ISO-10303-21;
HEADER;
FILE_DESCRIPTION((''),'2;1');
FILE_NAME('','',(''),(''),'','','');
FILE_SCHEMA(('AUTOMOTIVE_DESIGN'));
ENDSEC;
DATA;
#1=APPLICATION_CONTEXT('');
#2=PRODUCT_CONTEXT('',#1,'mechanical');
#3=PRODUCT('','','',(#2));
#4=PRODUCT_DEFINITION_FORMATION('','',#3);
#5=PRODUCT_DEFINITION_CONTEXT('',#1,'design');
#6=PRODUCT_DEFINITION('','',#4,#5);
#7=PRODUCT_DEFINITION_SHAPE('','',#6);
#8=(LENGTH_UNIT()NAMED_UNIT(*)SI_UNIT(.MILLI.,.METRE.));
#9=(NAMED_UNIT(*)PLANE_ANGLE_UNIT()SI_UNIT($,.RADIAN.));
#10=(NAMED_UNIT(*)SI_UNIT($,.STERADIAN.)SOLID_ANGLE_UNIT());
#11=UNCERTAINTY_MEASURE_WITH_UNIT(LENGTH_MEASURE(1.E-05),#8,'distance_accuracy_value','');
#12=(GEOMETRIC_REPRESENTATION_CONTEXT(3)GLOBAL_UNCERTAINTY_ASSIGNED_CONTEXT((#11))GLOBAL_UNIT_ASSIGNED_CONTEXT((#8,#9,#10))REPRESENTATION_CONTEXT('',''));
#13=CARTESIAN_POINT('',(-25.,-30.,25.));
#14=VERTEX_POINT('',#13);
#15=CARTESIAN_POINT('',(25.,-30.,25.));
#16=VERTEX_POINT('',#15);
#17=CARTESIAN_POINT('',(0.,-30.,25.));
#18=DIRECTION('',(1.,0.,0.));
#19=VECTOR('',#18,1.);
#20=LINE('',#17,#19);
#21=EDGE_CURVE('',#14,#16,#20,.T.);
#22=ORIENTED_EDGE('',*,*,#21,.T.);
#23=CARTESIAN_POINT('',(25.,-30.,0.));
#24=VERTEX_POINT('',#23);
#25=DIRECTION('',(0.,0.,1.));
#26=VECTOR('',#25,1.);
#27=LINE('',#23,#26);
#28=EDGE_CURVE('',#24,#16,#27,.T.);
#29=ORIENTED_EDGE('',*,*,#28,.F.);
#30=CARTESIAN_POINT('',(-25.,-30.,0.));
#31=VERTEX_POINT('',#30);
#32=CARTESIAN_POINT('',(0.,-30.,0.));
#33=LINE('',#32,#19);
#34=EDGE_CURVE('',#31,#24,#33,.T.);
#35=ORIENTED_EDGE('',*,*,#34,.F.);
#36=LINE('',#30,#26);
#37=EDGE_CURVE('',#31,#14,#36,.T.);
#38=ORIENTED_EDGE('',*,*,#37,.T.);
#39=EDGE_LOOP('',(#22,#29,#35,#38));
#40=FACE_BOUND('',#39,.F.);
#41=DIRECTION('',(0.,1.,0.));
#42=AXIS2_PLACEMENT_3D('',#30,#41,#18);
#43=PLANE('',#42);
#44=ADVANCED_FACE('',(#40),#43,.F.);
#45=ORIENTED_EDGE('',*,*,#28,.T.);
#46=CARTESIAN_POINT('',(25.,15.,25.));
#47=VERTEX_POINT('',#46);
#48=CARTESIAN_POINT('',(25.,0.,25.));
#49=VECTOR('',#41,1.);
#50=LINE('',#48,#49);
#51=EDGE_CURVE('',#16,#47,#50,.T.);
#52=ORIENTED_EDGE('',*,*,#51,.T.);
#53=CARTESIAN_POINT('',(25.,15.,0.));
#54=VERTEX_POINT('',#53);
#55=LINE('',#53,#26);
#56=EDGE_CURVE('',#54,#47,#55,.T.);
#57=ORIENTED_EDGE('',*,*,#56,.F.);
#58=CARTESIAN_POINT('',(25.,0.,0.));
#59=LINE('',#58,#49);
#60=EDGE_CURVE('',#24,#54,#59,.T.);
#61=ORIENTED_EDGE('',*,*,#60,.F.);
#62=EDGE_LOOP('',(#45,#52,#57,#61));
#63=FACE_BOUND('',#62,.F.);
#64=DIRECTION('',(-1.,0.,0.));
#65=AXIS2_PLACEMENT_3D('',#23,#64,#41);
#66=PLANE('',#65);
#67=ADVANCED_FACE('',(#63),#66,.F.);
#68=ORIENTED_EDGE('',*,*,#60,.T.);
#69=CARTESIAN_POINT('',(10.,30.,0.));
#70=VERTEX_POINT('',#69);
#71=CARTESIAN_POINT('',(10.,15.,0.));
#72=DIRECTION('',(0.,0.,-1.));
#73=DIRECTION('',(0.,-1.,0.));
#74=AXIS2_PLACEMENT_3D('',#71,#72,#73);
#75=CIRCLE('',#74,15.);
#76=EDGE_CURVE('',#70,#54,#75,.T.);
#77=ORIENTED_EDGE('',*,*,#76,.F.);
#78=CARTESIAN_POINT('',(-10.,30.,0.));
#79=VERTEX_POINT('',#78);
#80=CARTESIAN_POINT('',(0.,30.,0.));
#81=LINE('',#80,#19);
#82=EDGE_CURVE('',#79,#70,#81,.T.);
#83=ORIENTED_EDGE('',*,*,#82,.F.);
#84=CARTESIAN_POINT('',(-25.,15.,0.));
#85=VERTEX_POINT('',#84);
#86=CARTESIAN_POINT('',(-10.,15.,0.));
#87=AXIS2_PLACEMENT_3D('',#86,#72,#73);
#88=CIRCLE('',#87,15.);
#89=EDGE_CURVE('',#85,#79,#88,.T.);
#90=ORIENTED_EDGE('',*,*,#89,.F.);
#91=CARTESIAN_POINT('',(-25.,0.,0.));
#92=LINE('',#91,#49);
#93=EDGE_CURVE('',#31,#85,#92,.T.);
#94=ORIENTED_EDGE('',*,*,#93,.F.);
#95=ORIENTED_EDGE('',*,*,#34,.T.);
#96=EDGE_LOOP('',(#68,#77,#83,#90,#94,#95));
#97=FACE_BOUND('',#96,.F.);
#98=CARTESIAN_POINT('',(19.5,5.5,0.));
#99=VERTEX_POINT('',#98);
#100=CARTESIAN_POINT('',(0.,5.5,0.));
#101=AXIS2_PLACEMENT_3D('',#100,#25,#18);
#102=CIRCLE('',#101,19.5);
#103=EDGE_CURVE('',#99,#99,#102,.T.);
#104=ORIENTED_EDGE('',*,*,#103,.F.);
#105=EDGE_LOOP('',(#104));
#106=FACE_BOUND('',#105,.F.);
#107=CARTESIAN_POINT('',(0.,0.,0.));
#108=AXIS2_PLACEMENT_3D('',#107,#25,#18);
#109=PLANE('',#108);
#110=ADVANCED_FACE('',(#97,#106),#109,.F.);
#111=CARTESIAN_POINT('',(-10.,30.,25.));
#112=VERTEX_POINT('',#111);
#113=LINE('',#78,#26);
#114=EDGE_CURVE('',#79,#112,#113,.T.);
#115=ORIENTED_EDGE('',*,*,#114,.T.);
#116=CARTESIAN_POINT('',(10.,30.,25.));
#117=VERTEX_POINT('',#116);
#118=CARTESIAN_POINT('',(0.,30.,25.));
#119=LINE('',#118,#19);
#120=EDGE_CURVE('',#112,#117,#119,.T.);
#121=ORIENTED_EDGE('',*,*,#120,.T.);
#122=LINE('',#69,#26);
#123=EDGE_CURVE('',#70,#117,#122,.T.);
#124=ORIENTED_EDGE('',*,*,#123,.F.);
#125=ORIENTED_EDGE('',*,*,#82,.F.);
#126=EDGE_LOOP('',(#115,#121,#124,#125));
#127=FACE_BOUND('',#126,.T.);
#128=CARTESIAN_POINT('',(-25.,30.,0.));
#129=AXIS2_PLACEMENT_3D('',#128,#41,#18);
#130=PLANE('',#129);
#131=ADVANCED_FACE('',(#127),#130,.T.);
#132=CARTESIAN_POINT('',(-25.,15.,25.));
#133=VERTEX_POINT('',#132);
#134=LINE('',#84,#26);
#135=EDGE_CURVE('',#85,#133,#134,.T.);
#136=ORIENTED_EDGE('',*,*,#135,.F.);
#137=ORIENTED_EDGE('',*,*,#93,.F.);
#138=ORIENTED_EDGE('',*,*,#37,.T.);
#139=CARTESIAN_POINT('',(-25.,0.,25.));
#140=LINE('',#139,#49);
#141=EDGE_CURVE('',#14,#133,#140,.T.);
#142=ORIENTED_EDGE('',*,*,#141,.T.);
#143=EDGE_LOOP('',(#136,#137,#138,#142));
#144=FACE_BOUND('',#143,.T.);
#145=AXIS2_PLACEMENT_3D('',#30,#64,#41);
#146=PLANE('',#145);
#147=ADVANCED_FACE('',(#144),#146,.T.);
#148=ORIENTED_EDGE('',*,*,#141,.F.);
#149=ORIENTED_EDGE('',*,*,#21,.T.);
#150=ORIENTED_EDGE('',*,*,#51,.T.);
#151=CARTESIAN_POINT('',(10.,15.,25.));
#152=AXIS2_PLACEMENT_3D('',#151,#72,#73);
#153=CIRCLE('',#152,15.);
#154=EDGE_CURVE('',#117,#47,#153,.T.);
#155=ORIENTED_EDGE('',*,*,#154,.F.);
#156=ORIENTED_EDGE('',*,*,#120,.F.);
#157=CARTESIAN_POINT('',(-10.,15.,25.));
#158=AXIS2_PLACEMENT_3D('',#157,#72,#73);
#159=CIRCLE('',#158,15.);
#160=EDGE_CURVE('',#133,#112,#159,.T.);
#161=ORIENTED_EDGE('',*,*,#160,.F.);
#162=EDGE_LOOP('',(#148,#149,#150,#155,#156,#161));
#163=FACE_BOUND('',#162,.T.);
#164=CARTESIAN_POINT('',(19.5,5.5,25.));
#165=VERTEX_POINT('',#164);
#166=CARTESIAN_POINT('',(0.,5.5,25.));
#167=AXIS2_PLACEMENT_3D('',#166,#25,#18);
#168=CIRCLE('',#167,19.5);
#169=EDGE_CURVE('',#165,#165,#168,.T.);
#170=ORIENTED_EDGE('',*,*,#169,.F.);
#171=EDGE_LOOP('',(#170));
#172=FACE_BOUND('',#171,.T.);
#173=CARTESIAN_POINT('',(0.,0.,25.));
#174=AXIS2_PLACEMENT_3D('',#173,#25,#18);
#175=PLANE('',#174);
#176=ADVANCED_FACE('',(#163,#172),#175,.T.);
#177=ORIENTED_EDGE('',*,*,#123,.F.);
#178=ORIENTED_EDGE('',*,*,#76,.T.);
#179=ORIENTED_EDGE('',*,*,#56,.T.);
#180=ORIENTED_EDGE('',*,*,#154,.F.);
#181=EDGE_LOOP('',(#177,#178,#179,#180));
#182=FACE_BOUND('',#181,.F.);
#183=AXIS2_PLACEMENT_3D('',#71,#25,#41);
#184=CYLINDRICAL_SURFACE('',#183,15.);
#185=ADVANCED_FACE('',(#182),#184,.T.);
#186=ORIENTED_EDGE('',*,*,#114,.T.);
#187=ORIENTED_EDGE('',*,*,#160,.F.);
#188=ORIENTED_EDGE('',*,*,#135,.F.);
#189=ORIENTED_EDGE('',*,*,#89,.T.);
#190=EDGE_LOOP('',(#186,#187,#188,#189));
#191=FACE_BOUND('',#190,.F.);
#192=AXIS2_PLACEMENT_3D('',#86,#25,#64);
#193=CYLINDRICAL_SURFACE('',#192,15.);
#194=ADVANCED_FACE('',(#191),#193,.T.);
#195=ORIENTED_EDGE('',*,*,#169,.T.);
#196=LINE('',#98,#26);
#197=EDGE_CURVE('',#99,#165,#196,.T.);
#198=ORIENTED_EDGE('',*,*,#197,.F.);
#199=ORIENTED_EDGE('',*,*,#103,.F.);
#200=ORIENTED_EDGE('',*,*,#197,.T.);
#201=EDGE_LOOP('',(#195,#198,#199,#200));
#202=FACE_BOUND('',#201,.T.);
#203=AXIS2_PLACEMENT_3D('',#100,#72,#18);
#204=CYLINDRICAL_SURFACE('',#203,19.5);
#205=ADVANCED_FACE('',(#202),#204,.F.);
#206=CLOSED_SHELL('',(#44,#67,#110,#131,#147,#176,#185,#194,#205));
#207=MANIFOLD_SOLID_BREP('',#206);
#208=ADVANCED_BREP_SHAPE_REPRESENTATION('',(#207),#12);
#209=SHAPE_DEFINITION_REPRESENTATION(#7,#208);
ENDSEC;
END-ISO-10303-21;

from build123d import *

# Parameters (mm, degrees)
F0_W     = 50
F0_H     = 60
F0_R     = 19.5
F1_DEPTH = 25
F2_R     = 15
F3_R     = 15


with BuildPart() as f1:
    # F0 (on Top) → F1 (new body)
    with BuildSketch(Plane.XY):
        Rectangle(F0_W, F0_H)
        with Locations((0, 5.5)):
            Circle(F0_R, mode=Mode.SUBTRACT)
    extrude(amount=F1_DEPTH)

    # F2
    f2_edges = [f1.edges().sort_by_distance(p)[0] for p in [
        (-25, 30, 12.5),
    ]]
    fillet(f2_edges, radius=F2_R)

    # F3
    f3_edges = [f1.edges().sort_by_distance(p)[0] for p in [
        (25, 30, 12.5),
    ]]
    fillet(f3_edges, radius=F3_R)


solid = f1.part
